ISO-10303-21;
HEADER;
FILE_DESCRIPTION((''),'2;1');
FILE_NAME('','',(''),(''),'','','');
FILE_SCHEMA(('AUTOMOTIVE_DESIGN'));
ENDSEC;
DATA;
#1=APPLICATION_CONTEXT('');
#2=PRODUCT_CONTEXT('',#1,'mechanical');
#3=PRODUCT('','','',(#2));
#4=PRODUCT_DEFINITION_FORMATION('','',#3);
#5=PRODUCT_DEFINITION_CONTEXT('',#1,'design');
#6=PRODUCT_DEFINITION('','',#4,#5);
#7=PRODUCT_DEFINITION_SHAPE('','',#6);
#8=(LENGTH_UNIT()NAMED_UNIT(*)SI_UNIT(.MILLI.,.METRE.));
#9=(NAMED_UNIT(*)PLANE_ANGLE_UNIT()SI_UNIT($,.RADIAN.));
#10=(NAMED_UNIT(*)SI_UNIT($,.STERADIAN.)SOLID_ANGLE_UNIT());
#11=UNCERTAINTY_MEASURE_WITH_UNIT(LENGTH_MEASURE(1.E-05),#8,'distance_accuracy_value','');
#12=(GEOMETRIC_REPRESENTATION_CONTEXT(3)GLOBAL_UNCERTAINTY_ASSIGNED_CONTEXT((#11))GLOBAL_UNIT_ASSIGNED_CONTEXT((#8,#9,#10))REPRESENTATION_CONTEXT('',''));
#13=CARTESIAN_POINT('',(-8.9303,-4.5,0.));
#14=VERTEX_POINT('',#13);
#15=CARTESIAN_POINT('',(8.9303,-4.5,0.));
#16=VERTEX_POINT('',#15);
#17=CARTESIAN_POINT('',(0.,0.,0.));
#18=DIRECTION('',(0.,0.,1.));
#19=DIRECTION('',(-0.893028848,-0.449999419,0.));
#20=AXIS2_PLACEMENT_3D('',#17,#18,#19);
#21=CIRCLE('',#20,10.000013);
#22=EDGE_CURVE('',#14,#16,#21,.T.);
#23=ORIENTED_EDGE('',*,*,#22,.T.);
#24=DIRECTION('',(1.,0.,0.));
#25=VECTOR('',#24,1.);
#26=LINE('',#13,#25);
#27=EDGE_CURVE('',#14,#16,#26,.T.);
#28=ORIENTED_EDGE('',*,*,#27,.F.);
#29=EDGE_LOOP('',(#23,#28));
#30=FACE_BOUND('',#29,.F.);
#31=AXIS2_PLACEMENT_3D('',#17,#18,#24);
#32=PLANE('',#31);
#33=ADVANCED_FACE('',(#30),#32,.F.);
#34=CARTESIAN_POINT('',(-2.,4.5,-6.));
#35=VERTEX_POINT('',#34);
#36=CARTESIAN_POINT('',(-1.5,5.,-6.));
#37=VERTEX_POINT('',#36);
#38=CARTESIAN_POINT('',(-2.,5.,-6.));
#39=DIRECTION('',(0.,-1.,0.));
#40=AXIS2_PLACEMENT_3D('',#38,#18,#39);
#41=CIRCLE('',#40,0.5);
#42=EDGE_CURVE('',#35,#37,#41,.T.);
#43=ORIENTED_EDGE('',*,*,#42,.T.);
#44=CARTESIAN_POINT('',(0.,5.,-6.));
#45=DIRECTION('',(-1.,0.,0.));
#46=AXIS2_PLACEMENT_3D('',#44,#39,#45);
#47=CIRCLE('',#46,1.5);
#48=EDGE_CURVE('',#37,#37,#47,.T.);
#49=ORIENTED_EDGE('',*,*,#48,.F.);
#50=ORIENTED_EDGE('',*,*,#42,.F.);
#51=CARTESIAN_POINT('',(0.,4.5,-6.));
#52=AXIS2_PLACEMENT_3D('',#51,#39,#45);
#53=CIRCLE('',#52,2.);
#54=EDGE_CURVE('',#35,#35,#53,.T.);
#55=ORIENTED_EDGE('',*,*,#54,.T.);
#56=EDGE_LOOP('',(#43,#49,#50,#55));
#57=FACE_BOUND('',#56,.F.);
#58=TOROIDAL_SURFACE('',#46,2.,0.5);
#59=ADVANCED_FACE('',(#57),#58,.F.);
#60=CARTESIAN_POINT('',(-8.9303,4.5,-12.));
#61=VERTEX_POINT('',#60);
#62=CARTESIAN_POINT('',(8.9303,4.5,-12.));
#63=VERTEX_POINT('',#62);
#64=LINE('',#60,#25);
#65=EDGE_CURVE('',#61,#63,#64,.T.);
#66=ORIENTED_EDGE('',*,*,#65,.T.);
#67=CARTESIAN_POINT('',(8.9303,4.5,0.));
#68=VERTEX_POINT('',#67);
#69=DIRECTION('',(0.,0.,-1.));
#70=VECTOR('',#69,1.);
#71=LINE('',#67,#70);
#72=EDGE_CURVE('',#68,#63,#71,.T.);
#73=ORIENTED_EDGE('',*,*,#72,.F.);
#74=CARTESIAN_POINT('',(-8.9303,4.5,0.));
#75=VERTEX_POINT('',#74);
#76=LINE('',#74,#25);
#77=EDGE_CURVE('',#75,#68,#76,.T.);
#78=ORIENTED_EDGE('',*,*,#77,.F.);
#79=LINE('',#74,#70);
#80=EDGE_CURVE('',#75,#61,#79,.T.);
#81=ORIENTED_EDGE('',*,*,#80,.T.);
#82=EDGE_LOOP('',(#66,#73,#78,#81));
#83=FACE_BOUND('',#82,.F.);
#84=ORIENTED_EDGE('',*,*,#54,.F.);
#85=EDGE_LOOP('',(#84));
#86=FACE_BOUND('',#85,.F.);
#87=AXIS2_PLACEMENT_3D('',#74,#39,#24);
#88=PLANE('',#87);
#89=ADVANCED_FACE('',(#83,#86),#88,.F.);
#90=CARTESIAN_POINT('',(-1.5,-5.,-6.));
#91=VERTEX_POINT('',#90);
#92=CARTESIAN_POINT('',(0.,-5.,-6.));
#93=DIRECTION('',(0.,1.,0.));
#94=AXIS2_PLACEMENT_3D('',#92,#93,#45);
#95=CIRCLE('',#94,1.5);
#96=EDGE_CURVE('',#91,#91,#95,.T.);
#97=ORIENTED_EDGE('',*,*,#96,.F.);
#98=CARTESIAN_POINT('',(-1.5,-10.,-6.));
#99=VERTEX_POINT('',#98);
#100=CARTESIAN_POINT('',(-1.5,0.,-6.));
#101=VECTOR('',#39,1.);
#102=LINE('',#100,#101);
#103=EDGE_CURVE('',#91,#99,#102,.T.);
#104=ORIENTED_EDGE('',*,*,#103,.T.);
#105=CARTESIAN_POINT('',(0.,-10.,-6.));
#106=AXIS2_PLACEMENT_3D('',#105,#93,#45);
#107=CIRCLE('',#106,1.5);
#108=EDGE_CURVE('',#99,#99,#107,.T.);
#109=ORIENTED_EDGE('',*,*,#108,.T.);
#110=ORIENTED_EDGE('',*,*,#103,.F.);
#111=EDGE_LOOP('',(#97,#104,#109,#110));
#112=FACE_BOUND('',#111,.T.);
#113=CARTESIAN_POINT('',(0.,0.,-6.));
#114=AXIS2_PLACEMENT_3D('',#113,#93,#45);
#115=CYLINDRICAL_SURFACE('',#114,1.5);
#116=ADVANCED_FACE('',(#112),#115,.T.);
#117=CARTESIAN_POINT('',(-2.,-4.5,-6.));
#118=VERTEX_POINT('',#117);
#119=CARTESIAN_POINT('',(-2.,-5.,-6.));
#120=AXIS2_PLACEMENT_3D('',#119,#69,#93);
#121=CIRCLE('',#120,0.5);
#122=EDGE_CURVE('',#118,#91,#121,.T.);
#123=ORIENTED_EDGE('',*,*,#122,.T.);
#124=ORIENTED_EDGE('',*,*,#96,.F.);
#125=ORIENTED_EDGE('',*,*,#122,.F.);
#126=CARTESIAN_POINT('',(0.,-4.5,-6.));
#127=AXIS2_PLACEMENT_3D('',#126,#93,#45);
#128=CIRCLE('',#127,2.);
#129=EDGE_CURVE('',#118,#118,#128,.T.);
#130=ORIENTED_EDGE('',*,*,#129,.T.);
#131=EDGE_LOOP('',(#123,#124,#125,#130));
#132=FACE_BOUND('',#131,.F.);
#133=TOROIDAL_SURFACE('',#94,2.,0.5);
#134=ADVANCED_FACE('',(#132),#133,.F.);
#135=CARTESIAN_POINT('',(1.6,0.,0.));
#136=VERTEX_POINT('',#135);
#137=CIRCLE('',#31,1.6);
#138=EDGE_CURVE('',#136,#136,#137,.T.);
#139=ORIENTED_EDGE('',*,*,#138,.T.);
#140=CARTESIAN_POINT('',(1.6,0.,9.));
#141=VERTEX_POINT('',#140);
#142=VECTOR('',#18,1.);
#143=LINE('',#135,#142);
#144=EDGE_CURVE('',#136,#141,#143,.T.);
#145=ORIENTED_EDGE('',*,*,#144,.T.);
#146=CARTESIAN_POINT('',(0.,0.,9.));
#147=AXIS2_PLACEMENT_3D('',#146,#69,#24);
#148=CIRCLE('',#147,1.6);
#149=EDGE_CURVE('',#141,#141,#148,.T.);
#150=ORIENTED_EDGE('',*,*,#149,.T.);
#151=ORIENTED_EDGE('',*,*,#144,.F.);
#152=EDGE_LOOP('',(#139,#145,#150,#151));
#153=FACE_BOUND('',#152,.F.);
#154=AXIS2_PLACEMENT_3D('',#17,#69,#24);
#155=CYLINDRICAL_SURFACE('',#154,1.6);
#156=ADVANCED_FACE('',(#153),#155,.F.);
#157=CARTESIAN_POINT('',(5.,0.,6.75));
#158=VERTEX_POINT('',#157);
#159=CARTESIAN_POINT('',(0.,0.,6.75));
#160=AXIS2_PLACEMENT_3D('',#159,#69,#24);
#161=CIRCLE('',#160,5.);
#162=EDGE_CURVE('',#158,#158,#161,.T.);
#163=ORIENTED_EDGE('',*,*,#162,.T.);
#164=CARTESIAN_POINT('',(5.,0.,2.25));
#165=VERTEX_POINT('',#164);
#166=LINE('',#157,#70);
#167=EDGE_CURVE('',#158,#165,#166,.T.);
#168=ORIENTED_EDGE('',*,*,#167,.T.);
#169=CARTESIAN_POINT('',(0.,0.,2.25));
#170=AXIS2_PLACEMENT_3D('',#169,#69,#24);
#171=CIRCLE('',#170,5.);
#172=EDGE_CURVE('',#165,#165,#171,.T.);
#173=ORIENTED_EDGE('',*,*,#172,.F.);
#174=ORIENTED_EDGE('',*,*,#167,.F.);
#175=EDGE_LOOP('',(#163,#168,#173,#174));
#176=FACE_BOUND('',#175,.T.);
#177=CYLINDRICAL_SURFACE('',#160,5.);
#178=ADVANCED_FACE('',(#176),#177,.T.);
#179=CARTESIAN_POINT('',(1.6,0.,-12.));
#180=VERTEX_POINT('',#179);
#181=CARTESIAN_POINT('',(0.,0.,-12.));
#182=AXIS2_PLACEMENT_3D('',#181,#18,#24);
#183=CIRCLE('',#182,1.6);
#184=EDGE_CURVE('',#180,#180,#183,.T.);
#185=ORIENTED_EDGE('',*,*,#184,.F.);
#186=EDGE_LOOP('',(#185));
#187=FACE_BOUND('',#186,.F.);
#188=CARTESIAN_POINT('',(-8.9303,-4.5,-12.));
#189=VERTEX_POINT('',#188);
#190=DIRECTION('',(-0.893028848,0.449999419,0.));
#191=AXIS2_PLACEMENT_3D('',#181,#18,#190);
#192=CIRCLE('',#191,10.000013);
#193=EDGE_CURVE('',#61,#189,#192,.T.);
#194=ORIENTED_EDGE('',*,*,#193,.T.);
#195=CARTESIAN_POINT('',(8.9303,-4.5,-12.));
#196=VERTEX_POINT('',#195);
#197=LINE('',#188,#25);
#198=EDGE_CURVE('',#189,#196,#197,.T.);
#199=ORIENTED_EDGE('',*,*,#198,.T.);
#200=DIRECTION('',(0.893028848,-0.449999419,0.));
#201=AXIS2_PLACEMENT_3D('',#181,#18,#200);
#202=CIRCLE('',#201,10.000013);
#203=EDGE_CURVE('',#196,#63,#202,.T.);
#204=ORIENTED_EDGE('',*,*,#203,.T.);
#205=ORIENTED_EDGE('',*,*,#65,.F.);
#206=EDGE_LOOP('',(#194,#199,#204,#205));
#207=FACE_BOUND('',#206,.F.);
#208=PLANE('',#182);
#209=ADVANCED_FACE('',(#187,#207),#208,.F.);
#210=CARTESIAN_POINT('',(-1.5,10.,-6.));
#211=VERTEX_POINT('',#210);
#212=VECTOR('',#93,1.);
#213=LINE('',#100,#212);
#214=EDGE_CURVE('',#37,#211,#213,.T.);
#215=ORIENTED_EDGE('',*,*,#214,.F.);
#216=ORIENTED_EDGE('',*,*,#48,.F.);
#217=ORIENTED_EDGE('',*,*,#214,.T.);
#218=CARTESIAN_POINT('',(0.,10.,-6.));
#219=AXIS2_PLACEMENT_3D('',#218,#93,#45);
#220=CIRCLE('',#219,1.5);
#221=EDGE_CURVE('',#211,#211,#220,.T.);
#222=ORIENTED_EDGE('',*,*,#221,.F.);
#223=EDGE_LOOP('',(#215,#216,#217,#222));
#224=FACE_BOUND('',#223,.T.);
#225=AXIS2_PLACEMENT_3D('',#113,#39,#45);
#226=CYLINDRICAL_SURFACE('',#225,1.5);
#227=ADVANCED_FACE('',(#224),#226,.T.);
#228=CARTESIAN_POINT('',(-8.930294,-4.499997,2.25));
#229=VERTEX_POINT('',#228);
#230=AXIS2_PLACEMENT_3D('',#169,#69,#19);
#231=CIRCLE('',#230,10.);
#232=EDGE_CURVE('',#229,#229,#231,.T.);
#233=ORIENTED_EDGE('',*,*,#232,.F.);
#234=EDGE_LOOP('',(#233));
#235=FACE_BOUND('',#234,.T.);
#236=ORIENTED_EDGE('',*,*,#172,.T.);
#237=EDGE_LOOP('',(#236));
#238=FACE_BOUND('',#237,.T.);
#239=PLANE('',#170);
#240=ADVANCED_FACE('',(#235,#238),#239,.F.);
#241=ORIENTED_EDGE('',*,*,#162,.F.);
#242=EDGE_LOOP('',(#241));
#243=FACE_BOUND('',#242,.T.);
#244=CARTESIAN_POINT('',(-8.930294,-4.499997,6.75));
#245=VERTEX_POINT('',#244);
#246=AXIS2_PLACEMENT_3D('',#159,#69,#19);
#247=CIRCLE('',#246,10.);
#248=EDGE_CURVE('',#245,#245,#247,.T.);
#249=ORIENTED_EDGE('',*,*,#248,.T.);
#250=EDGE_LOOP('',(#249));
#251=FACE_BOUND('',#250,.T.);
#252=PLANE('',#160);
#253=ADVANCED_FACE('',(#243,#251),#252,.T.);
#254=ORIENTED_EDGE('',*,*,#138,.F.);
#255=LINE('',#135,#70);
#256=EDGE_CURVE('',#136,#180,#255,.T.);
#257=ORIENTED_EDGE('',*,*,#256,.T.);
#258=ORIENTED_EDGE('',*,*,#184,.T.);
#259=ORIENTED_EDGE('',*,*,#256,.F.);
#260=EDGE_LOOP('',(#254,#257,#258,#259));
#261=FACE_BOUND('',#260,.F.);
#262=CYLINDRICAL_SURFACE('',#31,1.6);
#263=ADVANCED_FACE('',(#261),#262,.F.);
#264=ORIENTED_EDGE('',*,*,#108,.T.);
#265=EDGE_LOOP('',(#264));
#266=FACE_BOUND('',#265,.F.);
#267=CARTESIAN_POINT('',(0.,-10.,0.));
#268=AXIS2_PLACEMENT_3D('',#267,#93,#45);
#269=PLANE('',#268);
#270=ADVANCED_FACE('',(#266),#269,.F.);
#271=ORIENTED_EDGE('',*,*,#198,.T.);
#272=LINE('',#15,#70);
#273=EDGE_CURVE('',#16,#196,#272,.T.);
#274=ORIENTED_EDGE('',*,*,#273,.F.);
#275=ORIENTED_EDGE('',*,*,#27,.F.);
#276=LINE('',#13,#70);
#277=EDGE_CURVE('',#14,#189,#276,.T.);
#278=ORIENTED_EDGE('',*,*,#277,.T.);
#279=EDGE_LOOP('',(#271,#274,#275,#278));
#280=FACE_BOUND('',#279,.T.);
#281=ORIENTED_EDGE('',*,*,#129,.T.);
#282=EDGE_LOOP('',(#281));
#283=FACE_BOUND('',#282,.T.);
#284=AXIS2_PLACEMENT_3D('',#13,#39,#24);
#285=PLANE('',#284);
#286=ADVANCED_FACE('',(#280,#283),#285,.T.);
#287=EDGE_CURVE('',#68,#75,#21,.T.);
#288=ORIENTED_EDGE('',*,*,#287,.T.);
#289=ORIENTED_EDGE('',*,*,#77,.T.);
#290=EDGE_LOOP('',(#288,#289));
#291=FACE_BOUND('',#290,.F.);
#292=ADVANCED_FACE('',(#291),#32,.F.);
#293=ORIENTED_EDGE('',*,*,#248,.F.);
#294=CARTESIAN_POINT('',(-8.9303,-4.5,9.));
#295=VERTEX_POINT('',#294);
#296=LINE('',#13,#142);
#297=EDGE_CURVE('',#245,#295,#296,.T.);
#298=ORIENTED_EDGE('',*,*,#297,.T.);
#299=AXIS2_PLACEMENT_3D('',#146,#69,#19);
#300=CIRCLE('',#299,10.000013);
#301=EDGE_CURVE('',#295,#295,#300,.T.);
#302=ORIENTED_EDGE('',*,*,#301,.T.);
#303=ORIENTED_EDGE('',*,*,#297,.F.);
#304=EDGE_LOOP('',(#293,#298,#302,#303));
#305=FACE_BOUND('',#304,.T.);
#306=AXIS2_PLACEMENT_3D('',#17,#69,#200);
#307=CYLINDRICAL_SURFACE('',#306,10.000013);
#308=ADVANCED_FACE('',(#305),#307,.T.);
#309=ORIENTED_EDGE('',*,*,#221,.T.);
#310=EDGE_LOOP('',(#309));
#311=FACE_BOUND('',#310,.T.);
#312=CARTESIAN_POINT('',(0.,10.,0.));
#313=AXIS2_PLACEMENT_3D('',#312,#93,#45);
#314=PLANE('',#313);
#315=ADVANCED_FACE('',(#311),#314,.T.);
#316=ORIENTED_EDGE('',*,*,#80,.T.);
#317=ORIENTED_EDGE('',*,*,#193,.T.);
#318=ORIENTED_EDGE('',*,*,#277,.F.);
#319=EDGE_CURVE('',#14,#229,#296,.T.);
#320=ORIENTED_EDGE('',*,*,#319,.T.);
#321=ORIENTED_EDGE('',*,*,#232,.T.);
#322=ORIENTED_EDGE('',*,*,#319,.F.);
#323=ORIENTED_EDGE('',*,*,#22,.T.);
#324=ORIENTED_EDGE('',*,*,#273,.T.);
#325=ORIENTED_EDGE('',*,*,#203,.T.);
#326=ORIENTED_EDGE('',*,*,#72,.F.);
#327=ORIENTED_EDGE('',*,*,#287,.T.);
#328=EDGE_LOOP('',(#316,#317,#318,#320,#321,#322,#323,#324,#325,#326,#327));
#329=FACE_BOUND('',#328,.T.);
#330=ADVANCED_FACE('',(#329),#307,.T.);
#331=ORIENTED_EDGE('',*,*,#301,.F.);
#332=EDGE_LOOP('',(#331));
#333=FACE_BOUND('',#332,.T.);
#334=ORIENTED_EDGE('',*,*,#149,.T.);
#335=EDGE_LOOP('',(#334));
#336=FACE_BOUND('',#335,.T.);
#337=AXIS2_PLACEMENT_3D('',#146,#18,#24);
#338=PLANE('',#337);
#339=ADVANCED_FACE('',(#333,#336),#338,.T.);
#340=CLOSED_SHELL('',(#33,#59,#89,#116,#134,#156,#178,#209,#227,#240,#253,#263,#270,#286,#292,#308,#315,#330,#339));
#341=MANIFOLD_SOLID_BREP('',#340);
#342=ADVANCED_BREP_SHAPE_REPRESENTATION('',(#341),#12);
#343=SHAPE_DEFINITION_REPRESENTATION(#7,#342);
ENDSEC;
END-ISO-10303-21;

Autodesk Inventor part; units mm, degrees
ref_plane "YZ Plane" through (0, 0, 0) normal (1, 0, 0) x (0, 1, 0)
ref_plane "XZ Plane" through (0, 0, 0) normal (0, 1, 0) x (-1, 0, 0)
ref_plane "XY Plane" through (0, 0, 0) normal (0, 0, 1) x (1, 0, 0)
sketch "Sketch1" plane through (0, 0, 0) normal (0, 0, 1) x (1, 0, 0)
  arc A0 (-8.9303, 4.5) -> (-8.9303, -4.5) centre (0, 0) ccw
  circle A1 centre (0, 0) radius 4.5 construction
  line L0 (-8.9303, 4.5) -> (8.9303, 4.5)
  line L1 (-8.9303, -4.5) -> (8.9303, -4.5)
  arc A2 (8.9303, 4.5) -> (-8.9303, 4.5) centre (0, 0) ccw
  arc A3 (8.9303, -4.5) -> (8.9303, 4.5) centre (0, 0) ccw
  arc A4 (-8.9303, -4.5) -> (8.9303, -4.5) centre (0, 0) ccw
  dimension "d0" = 20
  dimension "d1" = 9
extrude "Extrusion1" add sketch "Sketch1" against normal blind 12 contours L0 A3 L1 A0
extrude "Extrusion2" add sketch "Sketch1" along normal blind 9
sketch "Sketch2" plane through (0, 0, 0) normal (0, 1, 0) x (-1, 0, 0)
  circle A0 centre (0, -6) radius 1.5
  line L0 (0, 0) -> (0, -6) construction
  dimension "d6" = 3
  dimension "d7" = 6
extrude "Extrusion3" add sketch "Sketch2" along normal mid plane 20
sketch "Sketch3" plane through (0, 0, 0) normal (0, 1, 0) x (-1, 0, 0)
  line L0 (10, 9) -> (-10, 9) construction
  line L1 (8.9303, 0) -> (-8.9303, 0) construction
  line L2 (0, 9) -> (0, 0) construction
  line L3 (-8.9303, 0) -> (8.9303, 0) construction
  line L4 (0, 4.5) -> (-10, 4.5) construction
  line L5 (-10, 9) -> (-10, -12) construction
  line L6 (-5, 2.25) -> (-10, 2.25)
  line L7 (-10, 2.25) -> (-10, 6.75)
  line L8 (-10, 6.75) -> (-5, 6.75)
  line L9 (-5, 6.75) -> (-5, 2.25)
  line L10 (-5, 2.25) -> (-10, 6.75) construction
  line L11 (-10, 2.25) -> (-5, 6.75) construction
  point P0 (-7.5, 4.5)
  dimension "d10" = 4.5
  dimension "d11" = 10
revolve "Revolution1" cut sketch "Sketch3" angle 360 about axis through (0, 0, 9) along (0, 0, -1)
sketch "Sketch4" plane through (0, 0, 0) normal (0, 0, 1) x (1, 0, 0)
  circle A0 centre (0, 0) radius 1.6
  dimension "d22" = 3.2
extrude "Extrusion4" cut sketch "Sketch4" along normal through all both and the other way through all
chamfer "Chamfer1" [suppressed]
fillet "Fillet1" radius 0.5 2 edges at (1.5, -4.5, -6) (1.5, 4.5, -6)
properties part number "slider-1"
